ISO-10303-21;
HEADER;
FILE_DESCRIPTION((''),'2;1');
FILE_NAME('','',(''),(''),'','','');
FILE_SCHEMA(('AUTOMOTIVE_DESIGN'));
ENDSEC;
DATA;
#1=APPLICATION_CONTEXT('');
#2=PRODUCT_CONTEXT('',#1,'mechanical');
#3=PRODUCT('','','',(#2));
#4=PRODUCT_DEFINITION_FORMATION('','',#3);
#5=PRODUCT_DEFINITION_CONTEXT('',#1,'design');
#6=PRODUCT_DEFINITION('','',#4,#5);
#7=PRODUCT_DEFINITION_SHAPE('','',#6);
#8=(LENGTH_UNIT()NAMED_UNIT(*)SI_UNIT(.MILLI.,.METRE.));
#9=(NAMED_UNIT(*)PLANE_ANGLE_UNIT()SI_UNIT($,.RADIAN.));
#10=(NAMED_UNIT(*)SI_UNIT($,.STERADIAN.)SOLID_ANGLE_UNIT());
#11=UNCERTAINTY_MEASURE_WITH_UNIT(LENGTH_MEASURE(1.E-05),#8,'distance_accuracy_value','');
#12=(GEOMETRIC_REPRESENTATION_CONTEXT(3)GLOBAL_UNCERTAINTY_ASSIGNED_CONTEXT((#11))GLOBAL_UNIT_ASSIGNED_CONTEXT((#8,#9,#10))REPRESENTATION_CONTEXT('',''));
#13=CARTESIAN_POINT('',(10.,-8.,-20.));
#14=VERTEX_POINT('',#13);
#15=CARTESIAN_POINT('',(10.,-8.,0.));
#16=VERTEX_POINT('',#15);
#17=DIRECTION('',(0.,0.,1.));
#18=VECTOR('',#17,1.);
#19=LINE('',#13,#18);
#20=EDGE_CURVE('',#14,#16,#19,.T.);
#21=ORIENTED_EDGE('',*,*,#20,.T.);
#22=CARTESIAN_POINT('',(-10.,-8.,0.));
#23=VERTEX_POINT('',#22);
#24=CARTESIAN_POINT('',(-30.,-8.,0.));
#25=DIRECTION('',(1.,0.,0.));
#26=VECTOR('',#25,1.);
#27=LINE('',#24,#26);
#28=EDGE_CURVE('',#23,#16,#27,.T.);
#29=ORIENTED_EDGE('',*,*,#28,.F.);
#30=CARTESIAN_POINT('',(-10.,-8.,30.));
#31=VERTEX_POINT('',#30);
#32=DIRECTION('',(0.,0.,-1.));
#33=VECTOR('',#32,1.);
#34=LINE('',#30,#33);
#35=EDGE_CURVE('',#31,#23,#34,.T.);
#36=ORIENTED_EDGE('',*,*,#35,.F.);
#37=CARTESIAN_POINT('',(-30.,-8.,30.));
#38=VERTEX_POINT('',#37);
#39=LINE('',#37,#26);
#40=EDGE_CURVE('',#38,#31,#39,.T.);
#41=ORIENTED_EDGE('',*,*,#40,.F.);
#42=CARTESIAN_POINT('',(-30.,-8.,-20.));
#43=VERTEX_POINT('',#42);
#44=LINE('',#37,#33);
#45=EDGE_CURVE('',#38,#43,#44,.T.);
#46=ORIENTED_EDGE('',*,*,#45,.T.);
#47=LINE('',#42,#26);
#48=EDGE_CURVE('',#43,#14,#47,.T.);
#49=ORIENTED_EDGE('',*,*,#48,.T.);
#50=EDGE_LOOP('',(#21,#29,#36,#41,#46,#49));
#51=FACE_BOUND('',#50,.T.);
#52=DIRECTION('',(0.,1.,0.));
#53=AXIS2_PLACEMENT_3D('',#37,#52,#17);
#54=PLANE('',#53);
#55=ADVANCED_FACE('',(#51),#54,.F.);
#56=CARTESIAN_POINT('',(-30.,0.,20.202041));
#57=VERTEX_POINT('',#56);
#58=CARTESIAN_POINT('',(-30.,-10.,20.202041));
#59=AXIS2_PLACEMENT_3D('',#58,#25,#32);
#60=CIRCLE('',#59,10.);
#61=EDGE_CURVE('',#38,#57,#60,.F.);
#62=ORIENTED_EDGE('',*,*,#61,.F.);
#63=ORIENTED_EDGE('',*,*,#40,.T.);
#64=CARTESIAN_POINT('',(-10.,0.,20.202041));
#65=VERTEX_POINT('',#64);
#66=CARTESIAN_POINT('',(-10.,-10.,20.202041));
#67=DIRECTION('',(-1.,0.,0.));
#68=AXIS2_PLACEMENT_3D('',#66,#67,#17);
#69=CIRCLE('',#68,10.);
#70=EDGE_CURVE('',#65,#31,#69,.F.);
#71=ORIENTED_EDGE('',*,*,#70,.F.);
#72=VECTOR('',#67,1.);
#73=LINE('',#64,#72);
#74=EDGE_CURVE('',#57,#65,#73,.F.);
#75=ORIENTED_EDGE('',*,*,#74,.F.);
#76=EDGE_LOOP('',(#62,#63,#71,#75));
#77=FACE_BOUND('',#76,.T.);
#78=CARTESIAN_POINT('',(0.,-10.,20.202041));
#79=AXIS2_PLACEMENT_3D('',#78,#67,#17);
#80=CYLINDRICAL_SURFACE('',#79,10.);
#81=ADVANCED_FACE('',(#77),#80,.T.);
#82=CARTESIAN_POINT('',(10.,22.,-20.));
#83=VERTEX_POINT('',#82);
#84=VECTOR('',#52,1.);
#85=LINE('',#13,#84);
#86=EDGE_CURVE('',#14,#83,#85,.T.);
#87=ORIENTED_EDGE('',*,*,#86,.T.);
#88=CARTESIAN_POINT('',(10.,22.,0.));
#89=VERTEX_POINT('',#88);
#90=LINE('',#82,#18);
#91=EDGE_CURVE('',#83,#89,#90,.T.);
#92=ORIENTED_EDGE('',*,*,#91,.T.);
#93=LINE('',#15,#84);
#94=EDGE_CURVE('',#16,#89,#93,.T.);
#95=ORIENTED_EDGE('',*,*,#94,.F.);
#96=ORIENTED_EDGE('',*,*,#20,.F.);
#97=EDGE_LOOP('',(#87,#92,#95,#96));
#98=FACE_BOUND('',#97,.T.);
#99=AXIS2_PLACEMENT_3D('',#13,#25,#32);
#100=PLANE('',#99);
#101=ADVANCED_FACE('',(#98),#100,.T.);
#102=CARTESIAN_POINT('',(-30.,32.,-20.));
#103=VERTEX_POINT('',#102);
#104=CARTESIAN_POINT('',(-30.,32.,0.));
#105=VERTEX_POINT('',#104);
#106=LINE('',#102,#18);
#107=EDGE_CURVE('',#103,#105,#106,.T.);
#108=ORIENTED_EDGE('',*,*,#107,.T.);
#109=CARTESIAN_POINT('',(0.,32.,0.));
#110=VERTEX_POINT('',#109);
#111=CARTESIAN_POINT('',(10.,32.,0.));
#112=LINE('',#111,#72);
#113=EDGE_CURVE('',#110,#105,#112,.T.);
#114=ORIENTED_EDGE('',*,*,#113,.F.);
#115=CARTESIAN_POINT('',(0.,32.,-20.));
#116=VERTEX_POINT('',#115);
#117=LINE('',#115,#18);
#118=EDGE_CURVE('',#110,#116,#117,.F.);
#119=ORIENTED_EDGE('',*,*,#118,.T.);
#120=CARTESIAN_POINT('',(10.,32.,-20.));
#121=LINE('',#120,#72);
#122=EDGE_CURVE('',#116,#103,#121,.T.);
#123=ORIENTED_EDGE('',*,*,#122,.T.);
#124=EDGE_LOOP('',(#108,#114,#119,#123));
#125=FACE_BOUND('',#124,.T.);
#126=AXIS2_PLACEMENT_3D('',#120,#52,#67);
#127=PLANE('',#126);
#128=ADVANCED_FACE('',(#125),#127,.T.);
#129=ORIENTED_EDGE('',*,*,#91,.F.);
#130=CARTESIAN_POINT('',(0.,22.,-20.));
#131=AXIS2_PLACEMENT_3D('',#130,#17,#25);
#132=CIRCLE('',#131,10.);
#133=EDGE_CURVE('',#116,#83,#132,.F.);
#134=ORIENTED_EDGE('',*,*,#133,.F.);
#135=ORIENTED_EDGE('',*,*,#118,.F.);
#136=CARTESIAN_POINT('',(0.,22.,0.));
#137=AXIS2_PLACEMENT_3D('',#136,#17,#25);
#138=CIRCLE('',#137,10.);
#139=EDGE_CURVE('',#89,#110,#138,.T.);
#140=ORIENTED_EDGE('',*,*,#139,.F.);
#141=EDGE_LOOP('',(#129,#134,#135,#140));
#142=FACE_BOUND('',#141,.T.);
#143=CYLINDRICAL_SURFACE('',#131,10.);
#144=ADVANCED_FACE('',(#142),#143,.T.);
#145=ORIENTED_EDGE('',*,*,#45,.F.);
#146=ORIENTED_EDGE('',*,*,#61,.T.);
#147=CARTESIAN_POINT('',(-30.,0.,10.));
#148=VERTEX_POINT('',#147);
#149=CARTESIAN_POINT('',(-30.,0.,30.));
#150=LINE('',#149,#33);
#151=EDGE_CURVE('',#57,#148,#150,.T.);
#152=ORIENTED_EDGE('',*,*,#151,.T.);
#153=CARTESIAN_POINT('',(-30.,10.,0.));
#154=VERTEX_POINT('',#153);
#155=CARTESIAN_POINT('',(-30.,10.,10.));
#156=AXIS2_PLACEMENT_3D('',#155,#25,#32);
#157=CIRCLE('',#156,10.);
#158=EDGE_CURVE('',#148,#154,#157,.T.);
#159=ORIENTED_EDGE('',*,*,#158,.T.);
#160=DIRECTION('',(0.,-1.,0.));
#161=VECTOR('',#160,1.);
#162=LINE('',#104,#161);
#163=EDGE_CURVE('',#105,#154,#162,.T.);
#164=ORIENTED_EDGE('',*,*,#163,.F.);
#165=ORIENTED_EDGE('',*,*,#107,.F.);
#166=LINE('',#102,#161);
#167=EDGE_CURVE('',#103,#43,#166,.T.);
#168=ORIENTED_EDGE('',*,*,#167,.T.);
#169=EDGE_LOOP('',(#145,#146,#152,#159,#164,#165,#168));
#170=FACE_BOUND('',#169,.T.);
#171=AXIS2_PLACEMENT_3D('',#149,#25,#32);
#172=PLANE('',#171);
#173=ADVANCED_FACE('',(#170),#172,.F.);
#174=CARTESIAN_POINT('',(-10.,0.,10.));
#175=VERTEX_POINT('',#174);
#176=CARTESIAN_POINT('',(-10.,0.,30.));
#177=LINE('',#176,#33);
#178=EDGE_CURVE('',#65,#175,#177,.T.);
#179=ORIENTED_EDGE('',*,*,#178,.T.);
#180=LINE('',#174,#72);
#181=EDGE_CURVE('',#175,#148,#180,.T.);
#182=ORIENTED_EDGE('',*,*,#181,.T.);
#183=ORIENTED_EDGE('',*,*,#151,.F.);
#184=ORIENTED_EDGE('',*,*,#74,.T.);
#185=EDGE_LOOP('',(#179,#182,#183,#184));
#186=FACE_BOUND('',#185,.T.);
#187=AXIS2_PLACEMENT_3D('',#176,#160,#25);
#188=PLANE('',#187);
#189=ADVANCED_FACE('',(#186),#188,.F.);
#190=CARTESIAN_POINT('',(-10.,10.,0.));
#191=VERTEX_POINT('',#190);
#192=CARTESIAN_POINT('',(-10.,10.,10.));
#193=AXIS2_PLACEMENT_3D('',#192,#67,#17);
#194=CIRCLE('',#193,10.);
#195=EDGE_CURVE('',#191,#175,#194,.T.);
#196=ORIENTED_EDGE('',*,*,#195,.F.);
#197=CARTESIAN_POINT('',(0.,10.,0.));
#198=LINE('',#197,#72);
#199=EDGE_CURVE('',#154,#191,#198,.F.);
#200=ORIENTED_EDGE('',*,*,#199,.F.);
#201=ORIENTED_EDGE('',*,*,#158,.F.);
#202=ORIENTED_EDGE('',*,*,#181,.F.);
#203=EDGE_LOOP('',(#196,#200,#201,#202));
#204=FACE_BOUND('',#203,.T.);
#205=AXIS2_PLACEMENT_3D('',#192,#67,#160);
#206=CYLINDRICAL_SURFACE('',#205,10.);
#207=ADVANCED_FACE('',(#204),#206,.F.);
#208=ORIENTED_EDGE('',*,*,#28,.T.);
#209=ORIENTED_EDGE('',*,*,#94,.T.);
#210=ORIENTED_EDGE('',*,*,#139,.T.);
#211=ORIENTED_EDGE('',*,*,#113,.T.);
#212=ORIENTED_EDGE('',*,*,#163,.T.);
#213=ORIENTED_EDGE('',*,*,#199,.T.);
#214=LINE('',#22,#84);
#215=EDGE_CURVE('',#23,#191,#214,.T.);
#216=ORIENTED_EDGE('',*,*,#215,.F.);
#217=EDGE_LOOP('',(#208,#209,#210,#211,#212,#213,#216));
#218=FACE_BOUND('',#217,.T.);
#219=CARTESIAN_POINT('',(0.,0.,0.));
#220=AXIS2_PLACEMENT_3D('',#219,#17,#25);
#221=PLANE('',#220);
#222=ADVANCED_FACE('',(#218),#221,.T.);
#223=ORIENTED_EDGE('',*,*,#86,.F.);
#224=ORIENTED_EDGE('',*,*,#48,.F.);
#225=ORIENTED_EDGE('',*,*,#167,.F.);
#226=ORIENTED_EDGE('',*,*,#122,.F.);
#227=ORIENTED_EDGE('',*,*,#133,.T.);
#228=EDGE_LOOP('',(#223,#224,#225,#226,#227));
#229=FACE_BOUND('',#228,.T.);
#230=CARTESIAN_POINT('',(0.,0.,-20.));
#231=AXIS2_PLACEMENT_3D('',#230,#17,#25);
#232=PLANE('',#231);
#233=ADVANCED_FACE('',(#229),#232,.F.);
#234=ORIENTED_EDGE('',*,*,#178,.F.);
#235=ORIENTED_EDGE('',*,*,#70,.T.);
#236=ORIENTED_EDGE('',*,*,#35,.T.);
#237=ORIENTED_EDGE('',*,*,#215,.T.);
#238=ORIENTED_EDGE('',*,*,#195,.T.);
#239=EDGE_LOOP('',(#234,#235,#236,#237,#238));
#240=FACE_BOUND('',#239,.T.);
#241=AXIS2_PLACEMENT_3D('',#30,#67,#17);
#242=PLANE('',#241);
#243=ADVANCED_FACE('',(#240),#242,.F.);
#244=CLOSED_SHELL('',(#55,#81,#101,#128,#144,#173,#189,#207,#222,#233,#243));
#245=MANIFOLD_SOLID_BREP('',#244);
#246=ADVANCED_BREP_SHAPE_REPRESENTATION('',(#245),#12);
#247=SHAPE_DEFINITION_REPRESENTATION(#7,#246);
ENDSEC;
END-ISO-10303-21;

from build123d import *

# Parameters (mm, degrees)
SKETCH1_W           = 20
SKETCH1_H           = 8
BOSS_EXTRUDE1_DEPTH = 30
SKETCH2_W           = 40
SKETCH2_H           = 40
BOSS_EXTRUDE2_DEPTH = 20
FILLET1_R           = 10


with BuildPart() as part:
    # Sketch1 → Boss-Extrude1 (new body)
    with BuildSketch(Plane.XY):
        with Locations((-20, -4)):
            Rectangle(SKETCH1_W, SKETCH1_H)
    extrude(amount=BOSS_EXTRUDE1_DEPTH)

    # Sketch2 → Boss-Extrude2 (add)
    with BuildSketch(Plane.XY):
        with Locations((-10, 12)):
            Rectangle(SKETCH2_W, SKETCH2_H)
    extrude(amount=-BOSS_EXTRUDE2_DEPTH)

    # Fillet1
    # the kernel refuses this fillet: 10 mm, written as the material it adds along each edge
    with BuildSketch(Plane(origin=(-10, 0, 0), x_dir=(0, 1, 0), z_dir=(-1, 0, 0))) as fillet1_piece_1:
        with BuildLine():
            CenterArc((FILLET1_R, -FILLET1_R), FILLET1_R, 90, 90)
            Line((0, -FILLET1_R), (0, 0))
            Line((0, 0), (FILLET1_R, 0))
        make_face()
    extrude(amount=20)
    # the kernel refuses this fillet: 10 mm, written as the material it takes off along each edge
    with BuildSketch(Plane(origin=(10, 32, 25), x_dir=(-1, 0, 0), z_dir=(0, 0, -1))) as fillet1_2_piece_1:
        with BuildLine():
            CenterArc((FILLET1_R, -FILLET1_R), FILLET1_R, 90, 90)
            Line((0, -FILLET1_R), (0, 0))
            Line((0, 0), (FILLET1_R, 0))
        make_face()
    extrude(amount=70, mode=Mode.SUBTRACT)
    with BuildSketch(Plane(origin=(14.494897428, 0, 30), x_dir=(0, 0, -1), z_dir=(-1, 0, 0))) as fillet1_2_piece_2:
        with BuildLine():
            CenterArc((9.797958971, 10), FILLET1_R, 191.536959033, 78.463040967)
            Line((0, 8), (0, 0))
            Line((0, 0), (9.797958971, 0))
        make_face()
    extrude(amount=68.989794856, mode=Mode.SUBTRACT)


solid = part.part
